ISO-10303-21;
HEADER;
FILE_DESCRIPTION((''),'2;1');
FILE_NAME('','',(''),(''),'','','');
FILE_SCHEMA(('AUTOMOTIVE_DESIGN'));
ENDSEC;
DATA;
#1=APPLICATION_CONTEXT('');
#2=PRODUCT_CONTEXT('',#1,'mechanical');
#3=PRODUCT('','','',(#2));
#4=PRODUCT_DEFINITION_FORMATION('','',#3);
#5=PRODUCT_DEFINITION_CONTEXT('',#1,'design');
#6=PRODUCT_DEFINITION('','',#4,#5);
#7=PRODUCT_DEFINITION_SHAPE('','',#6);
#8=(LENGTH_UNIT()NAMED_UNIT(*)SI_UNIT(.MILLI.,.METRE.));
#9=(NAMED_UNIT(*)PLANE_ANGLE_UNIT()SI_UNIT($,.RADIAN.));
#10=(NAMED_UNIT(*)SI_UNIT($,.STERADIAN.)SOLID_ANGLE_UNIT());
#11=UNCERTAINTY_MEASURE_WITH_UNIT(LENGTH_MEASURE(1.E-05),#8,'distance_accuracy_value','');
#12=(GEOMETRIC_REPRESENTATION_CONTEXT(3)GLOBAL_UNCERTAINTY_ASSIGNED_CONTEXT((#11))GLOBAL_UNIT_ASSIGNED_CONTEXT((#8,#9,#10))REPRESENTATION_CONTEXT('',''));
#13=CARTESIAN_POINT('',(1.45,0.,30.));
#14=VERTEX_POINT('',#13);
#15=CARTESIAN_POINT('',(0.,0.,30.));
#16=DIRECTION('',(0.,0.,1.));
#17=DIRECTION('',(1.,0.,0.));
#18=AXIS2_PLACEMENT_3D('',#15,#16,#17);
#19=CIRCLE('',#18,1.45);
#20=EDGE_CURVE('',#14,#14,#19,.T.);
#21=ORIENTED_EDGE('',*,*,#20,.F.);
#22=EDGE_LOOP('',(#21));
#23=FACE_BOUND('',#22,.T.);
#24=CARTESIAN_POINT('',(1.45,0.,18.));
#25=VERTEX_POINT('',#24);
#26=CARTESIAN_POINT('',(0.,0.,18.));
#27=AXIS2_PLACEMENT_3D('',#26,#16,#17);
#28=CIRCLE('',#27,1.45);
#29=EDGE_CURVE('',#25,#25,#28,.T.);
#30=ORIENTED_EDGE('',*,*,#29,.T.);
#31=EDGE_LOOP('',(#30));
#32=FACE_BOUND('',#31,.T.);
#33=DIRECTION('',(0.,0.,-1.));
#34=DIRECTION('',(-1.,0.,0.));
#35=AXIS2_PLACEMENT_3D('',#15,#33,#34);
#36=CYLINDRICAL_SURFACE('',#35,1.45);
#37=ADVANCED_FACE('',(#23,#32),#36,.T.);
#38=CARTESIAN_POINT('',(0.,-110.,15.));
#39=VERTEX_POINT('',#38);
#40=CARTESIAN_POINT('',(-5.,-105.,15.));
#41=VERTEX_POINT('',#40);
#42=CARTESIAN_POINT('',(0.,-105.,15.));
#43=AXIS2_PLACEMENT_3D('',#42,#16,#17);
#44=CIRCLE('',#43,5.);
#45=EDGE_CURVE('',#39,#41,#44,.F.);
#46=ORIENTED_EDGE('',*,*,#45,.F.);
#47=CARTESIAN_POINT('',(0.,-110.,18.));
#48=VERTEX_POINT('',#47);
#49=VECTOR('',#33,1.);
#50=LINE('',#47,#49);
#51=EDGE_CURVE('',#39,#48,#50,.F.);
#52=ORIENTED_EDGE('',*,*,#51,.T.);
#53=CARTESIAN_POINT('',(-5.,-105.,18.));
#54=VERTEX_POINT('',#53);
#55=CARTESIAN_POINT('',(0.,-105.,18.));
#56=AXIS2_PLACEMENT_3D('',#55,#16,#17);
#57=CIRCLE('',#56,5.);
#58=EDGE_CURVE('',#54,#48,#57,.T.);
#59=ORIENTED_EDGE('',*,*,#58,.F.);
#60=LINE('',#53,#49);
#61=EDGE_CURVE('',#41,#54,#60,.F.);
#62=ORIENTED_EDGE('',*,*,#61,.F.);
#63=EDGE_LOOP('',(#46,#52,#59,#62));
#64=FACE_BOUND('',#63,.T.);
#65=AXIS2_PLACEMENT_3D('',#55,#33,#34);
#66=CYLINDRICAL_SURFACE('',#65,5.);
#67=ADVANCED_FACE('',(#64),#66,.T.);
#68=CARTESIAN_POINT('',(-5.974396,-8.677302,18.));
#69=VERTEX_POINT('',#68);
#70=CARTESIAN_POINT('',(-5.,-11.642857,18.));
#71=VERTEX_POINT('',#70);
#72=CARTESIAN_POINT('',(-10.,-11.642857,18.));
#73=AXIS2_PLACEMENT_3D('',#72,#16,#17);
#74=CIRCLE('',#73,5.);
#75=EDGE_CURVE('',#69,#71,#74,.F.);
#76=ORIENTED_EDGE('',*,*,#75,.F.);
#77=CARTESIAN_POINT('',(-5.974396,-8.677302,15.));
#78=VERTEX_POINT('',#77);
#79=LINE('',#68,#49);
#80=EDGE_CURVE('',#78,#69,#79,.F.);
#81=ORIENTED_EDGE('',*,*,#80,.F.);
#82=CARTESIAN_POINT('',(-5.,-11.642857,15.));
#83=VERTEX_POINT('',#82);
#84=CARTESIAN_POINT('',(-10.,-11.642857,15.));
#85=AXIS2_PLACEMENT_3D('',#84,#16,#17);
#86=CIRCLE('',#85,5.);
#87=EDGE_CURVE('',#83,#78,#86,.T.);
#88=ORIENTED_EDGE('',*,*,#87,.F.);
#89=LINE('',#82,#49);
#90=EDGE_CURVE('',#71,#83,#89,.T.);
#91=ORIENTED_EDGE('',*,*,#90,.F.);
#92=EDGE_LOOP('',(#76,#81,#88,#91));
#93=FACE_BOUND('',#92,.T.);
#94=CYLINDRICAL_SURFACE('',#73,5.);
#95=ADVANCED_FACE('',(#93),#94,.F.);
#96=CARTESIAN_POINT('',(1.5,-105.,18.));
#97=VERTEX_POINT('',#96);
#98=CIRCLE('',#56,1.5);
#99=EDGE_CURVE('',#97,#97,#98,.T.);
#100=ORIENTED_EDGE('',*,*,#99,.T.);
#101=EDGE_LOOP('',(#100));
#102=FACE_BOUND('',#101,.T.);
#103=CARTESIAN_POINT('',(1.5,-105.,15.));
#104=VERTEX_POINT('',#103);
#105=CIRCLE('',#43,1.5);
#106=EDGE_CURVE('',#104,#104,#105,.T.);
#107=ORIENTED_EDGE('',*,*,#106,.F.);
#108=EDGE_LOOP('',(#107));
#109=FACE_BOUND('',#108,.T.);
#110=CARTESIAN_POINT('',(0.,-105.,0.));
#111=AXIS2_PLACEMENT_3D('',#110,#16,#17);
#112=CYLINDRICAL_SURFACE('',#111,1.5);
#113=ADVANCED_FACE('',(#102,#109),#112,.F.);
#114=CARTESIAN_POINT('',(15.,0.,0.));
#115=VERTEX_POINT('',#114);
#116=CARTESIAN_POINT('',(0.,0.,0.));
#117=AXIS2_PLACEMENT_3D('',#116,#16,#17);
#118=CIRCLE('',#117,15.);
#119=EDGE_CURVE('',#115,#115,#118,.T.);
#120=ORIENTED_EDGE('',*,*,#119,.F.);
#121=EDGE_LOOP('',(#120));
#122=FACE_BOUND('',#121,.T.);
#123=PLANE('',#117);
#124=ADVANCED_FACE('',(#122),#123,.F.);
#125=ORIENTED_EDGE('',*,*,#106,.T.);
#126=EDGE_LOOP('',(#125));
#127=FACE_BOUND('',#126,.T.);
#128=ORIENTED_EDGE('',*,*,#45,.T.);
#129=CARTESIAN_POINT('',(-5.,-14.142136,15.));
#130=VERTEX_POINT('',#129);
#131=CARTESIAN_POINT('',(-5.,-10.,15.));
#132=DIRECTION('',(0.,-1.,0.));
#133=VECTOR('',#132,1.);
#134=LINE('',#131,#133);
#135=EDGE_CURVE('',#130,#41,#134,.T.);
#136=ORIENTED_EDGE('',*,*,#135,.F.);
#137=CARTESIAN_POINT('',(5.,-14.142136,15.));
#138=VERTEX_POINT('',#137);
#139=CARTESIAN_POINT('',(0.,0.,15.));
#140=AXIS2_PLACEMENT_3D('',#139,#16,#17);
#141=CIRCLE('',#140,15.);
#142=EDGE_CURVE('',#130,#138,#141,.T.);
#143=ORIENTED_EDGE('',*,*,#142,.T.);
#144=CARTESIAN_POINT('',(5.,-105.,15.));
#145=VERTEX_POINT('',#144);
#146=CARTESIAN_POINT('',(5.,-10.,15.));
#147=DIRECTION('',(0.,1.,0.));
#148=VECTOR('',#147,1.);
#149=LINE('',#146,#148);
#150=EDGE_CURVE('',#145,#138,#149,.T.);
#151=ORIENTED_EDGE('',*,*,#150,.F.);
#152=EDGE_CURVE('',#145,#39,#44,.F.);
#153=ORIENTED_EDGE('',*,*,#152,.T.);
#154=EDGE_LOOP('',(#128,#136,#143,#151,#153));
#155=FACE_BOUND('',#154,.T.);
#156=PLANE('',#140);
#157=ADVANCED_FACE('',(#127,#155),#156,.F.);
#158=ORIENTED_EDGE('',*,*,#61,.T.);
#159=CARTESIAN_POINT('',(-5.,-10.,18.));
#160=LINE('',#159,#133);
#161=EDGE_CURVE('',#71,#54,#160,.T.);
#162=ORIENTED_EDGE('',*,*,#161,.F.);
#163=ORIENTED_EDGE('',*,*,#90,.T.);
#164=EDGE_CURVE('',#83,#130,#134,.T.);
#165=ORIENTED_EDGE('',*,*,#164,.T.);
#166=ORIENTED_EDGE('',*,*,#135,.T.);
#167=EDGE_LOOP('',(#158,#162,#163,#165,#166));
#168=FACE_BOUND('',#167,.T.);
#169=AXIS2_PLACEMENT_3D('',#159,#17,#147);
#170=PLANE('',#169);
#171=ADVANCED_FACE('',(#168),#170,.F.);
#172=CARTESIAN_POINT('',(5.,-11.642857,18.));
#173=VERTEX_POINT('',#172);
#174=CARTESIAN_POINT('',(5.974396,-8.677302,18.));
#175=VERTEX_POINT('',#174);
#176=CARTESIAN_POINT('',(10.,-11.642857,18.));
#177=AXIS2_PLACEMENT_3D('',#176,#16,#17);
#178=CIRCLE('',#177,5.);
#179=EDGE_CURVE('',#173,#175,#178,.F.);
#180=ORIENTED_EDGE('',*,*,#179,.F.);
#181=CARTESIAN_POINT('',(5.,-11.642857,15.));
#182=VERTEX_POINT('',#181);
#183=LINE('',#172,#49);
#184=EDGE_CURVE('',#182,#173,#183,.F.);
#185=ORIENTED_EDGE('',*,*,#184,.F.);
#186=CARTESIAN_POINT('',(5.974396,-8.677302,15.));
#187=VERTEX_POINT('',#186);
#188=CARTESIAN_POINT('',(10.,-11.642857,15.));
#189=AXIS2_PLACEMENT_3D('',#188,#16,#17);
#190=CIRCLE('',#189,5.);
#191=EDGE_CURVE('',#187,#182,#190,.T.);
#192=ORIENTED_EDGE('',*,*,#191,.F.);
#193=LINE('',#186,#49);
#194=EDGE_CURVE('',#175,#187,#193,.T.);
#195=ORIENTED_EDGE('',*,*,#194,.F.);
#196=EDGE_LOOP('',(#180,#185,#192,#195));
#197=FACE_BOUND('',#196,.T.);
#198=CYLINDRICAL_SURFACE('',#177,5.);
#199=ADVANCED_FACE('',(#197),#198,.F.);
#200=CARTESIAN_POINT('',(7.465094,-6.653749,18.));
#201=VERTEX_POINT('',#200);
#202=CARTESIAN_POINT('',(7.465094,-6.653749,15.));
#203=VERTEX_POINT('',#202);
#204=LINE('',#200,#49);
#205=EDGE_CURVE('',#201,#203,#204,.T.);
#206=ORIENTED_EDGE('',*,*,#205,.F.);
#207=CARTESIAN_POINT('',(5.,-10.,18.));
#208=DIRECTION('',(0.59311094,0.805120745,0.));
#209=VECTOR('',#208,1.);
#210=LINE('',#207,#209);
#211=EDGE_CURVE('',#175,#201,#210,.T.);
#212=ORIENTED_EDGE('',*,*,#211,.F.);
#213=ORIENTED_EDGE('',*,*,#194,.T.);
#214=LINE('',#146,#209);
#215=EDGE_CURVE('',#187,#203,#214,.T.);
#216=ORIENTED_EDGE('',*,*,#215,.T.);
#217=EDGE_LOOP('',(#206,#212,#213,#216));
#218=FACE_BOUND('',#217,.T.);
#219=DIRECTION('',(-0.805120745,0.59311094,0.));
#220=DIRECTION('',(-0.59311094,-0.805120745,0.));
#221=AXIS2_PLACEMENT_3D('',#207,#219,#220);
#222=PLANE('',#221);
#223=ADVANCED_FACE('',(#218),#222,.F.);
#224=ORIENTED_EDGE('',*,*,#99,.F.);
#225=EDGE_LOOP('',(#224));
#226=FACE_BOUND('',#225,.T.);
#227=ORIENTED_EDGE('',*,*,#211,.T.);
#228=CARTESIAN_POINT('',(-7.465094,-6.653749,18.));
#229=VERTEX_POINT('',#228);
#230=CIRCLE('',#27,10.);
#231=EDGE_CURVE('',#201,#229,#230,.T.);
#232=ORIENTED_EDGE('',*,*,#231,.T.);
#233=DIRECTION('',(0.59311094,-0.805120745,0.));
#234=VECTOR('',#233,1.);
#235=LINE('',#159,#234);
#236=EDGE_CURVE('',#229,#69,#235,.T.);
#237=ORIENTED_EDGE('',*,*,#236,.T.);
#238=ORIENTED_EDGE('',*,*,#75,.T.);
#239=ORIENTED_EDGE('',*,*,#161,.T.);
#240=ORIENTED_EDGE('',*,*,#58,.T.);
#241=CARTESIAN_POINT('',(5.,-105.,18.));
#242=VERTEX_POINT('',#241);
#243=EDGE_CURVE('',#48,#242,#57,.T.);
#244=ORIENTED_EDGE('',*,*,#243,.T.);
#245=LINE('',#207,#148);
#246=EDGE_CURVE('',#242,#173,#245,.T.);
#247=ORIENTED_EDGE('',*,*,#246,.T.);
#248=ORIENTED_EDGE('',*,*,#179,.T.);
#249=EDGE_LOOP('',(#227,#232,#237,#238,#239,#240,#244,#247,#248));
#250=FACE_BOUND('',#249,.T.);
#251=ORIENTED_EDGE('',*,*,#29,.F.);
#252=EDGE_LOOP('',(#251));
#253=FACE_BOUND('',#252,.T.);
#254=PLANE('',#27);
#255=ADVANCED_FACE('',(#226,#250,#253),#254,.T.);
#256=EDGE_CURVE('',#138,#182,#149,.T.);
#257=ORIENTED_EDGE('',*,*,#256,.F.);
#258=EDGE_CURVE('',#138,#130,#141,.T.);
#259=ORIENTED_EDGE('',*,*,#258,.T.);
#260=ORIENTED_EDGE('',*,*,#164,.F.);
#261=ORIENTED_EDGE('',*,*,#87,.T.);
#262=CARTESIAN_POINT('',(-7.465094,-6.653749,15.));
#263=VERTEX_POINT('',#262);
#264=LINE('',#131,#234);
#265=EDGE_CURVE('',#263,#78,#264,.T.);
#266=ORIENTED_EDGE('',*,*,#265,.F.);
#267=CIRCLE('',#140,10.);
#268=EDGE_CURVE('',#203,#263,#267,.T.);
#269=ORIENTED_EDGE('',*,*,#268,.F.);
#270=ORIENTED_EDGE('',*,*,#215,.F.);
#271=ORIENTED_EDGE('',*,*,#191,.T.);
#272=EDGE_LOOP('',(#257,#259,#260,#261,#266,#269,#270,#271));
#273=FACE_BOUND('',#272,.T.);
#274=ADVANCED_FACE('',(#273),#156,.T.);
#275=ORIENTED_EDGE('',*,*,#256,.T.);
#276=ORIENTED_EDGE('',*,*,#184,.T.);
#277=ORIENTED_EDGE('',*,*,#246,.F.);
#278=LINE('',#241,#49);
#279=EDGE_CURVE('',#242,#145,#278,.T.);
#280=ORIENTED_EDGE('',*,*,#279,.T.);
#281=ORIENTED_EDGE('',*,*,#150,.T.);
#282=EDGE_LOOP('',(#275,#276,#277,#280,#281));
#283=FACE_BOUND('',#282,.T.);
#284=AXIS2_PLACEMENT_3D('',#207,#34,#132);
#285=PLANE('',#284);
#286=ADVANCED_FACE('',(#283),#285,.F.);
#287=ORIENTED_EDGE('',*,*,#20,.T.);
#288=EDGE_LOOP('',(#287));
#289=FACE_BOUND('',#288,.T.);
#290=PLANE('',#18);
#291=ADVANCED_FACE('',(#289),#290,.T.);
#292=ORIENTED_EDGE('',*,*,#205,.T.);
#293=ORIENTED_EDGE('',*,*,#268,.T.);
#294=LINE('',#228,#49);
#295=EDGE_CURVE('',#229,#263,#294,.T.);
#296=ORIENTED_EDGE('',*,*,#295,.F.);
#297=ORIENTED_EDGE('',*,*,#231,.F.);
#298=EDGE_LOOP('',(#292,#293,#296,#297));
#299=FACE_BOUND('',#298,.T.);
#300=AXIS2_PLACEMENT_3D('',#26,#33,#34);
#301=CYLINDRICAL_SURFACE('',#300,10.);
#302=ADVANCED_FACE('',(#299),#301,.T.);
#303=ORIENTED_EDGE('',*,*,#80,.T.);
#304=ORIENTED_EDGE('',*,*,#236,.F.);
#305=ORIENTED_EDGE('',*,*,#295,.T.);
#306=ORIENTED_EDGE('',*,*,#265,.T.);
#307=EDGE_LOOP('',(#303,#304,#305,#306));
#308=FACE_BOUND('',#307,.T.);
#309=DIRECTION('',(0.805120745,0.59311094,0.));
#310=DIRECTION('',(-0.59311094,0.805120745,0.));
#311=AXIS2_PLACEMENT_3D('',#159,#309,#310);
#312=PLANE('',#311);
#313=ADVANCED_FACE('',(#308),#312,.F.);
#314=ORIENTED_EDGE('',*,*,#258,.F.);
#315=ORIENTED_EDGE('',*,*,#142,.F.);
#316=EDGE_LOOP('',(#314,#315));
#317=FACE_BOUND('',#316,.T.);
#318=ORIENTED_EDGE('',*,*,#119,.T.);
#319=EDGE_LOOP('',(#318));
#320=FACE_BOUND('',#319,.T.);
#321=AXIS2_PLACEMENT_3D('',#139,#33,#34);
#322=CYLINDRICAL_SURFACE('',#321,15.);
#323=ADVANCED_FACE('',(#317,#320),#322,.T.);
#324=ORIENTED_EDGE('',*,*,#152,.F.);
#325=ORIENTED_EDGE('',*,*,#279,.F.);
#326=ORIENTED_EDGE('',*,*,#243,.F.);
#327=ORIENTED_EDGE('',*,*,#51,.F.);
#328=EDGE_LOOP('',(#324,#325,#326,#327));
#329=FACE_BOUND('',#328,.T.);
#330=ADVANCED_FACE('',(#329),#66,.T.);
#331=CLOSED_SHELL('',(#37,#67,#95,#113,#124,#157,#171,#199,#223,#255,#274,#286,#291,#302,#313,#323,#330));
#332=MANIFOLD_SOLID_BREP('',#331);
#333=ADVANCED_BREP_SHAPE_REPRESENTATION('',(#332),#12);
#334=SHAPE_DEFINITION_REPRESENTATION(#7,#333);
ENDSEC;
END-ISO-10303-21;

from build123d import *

# Parameters (mm, degrees)
SKETCH1_R           = 15
BOSS_EXTRUDE1_DEPTH = 15
SKETCH2_R           = 1.45
BOSS_EXTRUDE2_DEPTH = 15
BOSS_EXTRUDE3_DEPTH = 3
SKETCH5_R           = 1.5
CUT_EXTRUDE1_DEPTH  = 113.467773162
FILLET1_R           = 5


with BuildPart() as part:
    # Sketch1 → Boss-Extrude1 (new body)
    with BuildSketch(Plane.XY):
        Circle(SKETCH1_R)
    extrude(amount=BOSS_EXTRUDE1_DEPTH)

    # Sketch2 → Boss-Extrude2 (add)
    with BuildSketch(Plane.XY.offset(15)):
        Circle(SKETCH2_R)
    extrude(amount=BOSS_EXTRUDE2_DEPTH)

    # Sketch4 → Boss-Extrude3 (add)
    with BuildSketch(Plane.XY.offset(15)):
        with BuildLine():
            Line((5, -10), (7.465093605, -6.653749128))
            ThreePointArc((7.465093605, -6.653749128), (0, 10), (-7.465093605, -6.653749128))
            Line((-7.465093605, -6.653749128), (-5, -10))
            Line((-5, -10), (-5, -110))
            Line((-5, -110), (5, -110))
            Line((5, -110), (5, -10))
        make_face()
    extrude(amount=BOSS_EXTRUDE3_DEPTH)

    # Sketch5 → Cut-Extrude1 (cut, through all)
    with BuildSketch(Plane.XY.offset(18)):
        with Locations((0, -105)):
            Circle(SKETCH5_R)
    extrude(amount=-CUT_EXTRUDE1_DEPTH, mode=Mode.SUBTRACT)

    # Fillet1
    fillet1_edges = [part.edges().sort_by_distance(p)[0] for p in [
        (5, -10, 16.5),
        (-5, -10, 16.5),
        (-5, -110, 16.5),
        (5, -110, 16.5),
    ]]
    fillet(fillet1_edges, radius=FILLET1_R - 0.0001)  # a hair under: the kernel refuses the full size


solid = part.part
